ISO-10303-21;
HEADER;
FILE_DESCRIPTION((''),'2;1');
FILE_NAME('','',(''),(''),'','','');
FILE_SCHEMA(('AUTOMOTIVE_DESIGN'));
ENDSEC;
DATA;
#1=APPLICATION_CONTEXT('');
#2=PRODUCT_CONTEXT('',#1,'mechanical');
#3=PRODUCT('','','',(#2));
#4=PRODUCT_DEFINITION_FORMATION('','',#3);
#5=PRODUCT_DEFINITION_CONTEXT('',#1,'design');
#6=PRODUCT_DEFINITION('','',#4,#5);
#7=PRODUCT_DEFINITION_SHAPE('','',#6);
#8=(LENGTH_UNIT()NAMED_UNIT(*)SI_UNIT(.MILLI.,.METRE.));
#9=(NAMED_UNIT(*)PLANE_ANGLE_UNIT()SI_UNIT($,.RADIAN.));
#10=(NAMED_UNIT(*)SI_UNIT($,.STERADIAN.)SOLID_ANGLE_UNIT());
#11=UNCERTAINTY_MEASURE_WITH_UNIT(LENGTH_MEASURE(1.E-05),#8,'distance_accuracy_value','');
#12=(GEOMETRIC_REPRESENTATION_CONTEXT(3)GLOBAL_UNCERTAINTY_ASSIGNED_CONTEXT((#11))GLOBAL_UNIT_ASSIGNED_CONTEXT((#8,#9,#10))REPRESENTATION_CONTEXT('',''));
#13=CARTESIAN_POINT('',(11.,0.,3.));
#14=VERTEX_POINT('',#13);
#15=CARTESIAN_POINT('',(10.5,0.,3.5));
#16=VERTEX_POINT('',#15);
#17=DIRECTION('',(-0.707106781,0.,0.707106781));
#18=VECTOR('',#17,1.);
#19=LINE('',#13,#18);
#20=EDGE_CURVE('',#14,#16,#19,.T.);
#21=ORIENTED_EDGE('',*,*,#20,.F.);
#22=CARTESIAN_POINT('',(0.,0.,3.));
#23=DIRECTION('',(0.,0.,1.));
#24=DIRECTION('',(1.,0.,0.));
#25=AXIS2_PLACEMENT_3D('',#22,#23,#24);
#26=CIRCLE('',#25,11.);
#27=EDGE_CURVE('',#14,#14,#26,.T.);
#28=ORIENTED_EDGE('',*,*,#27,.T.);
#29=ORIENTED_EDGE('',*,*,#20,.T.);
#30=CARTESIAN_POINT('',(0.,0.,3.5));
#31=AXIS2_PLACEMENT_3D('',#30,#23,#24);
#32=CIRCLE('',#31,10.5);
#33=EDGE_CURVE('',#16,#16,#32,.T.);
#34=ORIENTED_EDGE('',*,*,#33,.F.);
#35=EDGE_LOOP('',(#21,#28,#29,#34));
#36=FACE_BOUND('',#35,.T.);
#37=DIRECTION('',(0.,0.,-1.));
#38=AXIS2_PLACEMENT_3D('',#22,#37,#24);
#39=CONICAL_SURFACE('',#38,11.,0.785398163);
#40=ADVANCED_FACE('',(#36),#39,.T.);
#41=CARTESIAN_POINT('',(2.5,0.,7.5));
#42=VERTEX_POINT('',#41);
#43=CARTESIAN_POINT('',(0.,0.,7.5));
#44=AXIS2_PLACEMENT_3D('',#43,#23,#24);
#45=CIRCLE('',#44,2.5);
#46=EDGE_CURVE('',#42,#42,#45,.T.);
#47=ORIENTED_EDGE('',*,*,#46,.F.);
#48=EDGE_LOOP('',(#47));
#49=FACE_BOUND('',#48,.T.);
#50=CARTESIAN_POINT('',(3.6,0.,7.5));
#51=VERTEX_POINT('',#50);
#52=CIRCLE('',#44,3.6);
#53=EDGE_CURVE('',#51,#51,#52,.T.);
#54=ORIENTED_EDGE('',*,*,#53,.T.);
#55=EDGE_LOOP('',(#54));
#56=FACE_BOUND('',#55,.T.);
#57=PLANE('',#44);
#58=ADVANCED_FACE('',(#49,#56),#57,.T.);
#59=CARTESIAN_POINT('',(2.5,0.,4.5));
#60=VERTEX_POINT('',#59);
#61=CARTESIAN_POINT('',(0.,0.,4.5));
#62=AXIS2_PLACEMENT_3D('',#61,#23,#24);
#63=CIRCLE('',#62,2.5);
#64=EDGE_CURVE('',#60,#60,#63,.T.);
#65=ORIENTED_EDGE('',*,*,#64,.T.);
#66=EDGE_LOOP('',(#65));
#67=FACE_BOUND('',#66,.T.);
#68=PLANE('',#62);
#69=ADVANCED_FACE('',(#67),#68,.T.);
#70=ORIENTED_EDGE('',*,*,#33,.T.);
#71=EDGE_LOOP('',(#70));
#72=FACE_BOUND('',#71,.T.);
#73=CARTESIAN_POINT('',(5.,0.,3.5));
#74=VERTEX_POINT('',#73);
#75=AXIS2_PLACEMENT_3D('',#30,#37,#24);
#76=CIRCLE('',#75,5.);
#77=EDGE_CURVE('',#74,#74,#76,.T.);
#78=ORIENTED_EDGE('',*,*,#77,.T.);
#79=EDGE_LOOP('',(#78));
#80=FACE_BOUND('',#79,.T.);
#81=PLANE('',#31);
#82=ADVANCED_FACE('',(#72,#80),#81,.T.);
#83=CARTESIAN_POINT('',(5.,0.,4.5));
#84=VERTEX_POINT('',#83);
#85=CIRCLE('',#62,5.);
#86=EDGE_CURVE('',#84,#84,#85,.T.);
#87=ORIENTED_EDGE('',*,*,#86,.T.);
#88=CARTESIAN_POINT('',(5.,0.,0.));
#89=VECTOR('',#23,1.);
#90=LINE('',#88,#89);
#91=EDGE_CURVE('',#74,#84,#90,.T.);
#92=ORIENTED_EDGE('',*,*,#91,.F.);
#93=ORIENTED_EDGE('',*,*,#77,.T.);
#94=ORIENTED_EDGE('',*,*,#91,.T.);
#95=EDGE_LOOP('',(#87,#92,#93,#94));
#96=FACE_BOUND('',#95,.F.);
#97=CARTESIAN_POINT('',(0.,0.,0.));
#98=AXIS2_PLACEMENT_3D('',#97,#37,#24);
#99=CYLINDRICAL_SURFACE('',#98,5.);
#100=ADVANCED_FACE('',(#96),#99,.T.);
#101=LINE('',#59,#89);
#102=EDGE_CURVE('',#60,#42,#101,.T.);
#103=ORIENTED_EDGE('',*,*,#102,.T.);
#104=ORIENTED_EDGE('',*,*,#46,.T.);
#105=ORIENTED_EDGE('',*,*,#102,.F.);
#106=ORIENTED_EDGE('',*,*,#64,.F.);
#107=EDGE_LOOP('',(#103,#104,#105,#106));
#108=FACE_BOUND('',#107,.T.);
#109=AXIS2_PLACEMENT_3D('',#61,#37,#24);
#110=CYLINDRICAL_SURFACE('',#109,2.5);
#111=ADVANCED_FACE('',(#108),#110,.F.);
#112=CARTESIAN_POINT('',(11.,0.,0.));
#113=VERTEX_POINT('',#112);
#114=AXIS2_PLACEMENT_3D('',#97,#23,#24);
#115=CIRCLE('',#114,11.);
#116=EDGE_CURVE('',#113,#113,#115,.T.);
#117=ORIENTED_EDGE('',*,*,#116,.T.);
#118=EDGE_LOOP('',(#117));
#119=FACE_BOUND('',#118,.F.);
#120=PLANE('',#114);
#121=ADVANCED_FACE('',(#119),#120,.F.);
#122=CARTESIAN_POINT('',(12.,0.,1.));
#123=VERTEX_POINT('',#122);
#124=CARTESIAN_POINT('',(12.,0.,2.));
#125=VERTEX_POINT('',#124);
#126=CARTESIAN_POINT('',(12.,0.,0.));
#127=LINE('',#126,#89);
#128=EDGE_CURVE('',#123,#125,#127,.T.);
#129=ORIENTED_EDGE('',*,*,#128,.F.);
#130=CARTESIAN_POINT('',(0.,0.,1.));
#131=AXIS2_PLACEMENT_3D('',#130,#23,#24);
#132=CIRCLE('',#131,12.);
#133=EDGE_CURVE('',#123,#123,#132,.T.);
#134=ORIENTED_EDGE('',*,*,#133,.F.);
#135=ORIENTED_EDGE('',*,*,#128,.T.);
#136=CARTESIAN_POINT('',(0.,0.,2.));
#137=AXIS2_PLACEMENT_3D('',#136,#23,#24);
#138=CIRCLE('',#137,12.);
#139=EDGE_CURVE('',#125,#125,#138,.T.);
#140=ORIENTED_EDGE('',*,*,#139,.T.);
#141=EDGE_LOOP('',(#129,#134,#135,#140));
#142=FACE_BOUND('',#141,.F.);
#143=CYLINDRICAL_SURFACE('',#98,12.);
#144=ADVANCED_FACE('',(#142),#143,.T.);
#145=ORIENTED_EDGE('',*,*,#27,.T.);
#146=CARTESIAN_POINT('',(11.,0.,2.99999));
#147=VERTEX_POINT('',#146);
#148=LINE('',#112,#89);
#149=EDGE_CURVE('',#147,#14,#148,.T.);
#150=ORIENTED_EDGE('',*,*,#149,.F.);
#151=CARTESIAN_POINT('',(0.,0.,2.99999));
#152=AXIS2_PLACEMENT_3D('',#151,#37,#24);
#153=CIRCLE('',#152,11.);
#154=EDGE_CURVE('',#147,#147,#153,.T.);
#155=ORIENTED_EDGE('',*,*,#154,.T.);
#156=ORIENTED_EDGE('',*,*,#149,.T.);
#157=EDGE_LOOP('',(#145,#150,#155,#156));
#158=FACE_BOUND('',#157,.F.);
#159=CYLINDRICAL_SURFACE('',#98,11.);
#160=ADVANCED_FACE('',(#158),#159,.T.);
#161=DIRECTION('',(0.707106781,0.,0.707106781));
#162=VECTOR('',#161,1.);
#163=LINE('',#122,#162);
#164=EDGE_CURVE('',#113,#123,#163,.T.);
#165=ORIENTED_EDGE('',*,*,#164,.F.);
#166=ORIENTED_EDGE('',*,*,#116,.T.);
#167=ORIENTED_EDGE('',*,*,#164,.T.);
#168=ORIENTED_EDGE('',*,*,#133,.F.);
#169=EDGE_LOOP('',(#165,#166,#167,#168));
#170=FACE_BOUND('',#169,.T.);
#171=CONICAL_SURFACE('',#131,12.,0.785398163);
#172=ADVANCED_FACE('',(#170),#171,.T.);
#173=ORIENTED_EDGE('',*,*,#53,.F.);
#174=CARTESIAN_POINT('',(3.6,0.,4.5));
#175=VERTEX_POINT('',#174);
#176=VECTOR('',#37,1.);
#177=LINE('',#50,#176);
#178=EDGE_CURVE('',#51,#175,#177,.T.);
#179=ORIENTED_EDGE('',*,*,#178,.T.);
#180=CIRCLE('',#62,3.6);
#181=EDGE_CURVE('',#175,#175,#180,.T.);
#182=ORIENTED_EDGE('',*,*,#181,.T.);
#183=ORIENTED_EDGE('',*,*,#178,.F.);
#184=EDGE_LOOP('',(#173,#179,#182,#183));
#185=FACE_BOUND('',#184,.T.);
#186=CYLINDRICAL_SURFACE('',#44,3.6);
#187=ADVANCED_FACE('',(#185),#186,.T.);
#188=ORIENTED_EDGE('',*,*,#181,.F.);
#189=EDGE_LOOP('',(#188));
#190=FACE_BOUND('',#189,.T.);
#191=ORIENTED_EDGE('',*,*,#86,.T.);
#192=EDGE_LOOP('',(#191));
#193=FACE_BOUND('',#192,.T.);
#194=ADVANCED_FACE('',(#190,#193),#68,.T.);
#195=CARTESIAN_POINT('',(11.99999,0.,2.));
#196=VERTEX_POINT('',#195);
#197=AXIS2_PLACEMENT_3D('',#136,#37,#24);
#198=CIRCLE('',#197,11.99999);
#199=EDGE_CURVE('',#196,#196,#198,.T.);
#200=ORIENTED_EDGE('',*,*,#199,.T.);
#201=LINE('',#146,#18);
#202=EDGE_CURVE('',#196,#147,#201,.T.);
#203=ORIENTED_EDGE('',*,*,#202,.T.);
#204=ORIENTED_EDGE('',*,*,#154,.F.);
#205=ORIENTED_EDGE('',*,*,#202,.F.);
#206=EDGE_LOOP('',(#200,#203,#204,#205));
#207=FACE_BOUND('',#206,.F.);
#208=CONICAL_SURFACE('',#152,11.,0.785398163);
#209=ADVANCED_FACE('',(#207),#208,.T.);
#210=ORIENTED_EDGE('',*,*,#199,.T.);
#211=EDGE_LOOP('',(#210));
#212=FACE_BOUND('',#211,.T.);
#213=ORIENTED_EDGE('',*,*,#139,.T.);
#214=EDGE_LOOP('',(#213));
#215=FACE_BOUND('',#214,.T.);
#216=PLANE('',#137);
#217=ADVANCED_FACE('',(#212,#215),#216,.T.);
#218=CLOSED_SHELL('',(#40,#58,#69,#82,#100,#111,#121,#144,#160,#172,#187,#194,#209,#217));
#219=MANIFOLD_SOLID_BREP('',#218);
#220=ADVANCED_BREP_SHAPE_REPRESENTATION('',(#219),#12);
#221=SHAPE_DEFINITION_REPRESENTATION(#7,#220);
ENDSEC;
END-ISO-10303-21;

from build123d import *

# Parameters (mm, degrees)
F0_R      = 12
F0_R_2    = 11
F0_R_3    = 5
F0_R_4    = 4.1
F0_R_5    = 3
F1_DEPTH  = 2
F2_DEPTH  = 3.5
F3_SIZE   = 0.99999
F4_DEPTH  = 4.5
F5_DEPTH  = 7.5
F6_SIZE   = 1
F7_SIZE   = 0.5
F8_R      = 3
F8_R_2    = 2.5
F9_DEPTH  = 3
F10_R     = 4.1
F10_R_2   = 3.6
F11_DEPTH = 3


# Not quite as in the source:
# - a fillet or chamfer is up to 0.001 mm smaller than in the source, because OpenCascade refuses the exact size


with BuildPart() as f1:
    # F0 (on Top) → F1 (new body)
    with BuildSketch(Plane.XY):
        Circle(F0_R)
        Circle(F0_R_2, mode=Mode.SUBTRACT)
        Circle(F0_R_2)
        Circle(F0_R_3, mode=Mode.SUBTRACT)
        Circle(F0_R_3)
        Circle(F0_R_4, mode=Mode.SUBTRACT)
        Circle(F0_R_4)
        Circle(F0_R_5, mode=Mode.SUBTRACT)
        Circle(F0_R_5)
    extrude(amount=F1_DEPTH)

    # F0 (on Top) → F2 (join)
    with BuildSketch(Plane.XY):
        Circle(F0_R_2)
        Circle(F0_R_3, mode=Mode.SUBTRACT)
        Circle(F0_R_3)
        Circle(F0_R_4, mode=Mode.SUBTRACT)
        Circle(F0_R_4)
        Circle(F0_R_5, mode=Mode.SUBTRACT)
        Circle(F0_R_5)
    extrude(amount=F2_DEPTH)

    # F3 (size 1 in the source; OpenCascade refuses exactly that, so slightly less here)
    f3_edges = [f1.edges().sort_by_distance(p)[0] for p in [
        (-11, 0, 2),
    ]]
    chamfer(f3_edges, length=F3_SIZE)

    # F0 (on Top) → F4 (join)
    with BuildSketch(Plane.XY):
        Circle(F0_R_3)
        Circle(F0_R_4, mode=Mode.SUBTRACT)
        Circle(F0_R_4)
        Circle(F0_R_5, mode=Mode.SUBTRACT)
        Circle(F0_R_5)
    extrude(amount=F4_DEPTH)

    # F0 (on Top) → F5 (join)
    with BuildSketch(Plane.XY):
        Circle(F0_R_4)
        Circle(F0_R_5, mode=Mode.SUBTRACT)
    extrude(amount=F5_DEPTH)

    # F6
    f6_edges = [f1.edges().sort_by_distance(p)[0] for p in [
        (-12, 0, 0),
    ]]
    chamfer(f6_edges, length=F6_SIZE)

    # F7
    f7_edges = [f1.edges().sort_by_distance(p)[0] for p in [
        (-11, 0, 3.5),
    ]]
    chamfer(f7_edges, length=F7_SIZE)

    # F8 (on face) → F9 (join, through all)
    with BuildSketch(Plane.XY.offset(4.5)):
        Circle(F8_R)
        Circle(F8_R_2, mode=Mode.SUBTRACT)
    extrude(amount=F9_DEPTH)

    # F10 (on face) → F11 (cut, through all)
    with BuildSketch(Plane.XY.offset(7.5)):
        Circle(F10_R)
        Circle(F10_R_2, mode=Mode.SUBTRACT)
    extrude(amount=-F11_DEPTH, mode=Mode.SUBTRACT)


solid = f1.part
